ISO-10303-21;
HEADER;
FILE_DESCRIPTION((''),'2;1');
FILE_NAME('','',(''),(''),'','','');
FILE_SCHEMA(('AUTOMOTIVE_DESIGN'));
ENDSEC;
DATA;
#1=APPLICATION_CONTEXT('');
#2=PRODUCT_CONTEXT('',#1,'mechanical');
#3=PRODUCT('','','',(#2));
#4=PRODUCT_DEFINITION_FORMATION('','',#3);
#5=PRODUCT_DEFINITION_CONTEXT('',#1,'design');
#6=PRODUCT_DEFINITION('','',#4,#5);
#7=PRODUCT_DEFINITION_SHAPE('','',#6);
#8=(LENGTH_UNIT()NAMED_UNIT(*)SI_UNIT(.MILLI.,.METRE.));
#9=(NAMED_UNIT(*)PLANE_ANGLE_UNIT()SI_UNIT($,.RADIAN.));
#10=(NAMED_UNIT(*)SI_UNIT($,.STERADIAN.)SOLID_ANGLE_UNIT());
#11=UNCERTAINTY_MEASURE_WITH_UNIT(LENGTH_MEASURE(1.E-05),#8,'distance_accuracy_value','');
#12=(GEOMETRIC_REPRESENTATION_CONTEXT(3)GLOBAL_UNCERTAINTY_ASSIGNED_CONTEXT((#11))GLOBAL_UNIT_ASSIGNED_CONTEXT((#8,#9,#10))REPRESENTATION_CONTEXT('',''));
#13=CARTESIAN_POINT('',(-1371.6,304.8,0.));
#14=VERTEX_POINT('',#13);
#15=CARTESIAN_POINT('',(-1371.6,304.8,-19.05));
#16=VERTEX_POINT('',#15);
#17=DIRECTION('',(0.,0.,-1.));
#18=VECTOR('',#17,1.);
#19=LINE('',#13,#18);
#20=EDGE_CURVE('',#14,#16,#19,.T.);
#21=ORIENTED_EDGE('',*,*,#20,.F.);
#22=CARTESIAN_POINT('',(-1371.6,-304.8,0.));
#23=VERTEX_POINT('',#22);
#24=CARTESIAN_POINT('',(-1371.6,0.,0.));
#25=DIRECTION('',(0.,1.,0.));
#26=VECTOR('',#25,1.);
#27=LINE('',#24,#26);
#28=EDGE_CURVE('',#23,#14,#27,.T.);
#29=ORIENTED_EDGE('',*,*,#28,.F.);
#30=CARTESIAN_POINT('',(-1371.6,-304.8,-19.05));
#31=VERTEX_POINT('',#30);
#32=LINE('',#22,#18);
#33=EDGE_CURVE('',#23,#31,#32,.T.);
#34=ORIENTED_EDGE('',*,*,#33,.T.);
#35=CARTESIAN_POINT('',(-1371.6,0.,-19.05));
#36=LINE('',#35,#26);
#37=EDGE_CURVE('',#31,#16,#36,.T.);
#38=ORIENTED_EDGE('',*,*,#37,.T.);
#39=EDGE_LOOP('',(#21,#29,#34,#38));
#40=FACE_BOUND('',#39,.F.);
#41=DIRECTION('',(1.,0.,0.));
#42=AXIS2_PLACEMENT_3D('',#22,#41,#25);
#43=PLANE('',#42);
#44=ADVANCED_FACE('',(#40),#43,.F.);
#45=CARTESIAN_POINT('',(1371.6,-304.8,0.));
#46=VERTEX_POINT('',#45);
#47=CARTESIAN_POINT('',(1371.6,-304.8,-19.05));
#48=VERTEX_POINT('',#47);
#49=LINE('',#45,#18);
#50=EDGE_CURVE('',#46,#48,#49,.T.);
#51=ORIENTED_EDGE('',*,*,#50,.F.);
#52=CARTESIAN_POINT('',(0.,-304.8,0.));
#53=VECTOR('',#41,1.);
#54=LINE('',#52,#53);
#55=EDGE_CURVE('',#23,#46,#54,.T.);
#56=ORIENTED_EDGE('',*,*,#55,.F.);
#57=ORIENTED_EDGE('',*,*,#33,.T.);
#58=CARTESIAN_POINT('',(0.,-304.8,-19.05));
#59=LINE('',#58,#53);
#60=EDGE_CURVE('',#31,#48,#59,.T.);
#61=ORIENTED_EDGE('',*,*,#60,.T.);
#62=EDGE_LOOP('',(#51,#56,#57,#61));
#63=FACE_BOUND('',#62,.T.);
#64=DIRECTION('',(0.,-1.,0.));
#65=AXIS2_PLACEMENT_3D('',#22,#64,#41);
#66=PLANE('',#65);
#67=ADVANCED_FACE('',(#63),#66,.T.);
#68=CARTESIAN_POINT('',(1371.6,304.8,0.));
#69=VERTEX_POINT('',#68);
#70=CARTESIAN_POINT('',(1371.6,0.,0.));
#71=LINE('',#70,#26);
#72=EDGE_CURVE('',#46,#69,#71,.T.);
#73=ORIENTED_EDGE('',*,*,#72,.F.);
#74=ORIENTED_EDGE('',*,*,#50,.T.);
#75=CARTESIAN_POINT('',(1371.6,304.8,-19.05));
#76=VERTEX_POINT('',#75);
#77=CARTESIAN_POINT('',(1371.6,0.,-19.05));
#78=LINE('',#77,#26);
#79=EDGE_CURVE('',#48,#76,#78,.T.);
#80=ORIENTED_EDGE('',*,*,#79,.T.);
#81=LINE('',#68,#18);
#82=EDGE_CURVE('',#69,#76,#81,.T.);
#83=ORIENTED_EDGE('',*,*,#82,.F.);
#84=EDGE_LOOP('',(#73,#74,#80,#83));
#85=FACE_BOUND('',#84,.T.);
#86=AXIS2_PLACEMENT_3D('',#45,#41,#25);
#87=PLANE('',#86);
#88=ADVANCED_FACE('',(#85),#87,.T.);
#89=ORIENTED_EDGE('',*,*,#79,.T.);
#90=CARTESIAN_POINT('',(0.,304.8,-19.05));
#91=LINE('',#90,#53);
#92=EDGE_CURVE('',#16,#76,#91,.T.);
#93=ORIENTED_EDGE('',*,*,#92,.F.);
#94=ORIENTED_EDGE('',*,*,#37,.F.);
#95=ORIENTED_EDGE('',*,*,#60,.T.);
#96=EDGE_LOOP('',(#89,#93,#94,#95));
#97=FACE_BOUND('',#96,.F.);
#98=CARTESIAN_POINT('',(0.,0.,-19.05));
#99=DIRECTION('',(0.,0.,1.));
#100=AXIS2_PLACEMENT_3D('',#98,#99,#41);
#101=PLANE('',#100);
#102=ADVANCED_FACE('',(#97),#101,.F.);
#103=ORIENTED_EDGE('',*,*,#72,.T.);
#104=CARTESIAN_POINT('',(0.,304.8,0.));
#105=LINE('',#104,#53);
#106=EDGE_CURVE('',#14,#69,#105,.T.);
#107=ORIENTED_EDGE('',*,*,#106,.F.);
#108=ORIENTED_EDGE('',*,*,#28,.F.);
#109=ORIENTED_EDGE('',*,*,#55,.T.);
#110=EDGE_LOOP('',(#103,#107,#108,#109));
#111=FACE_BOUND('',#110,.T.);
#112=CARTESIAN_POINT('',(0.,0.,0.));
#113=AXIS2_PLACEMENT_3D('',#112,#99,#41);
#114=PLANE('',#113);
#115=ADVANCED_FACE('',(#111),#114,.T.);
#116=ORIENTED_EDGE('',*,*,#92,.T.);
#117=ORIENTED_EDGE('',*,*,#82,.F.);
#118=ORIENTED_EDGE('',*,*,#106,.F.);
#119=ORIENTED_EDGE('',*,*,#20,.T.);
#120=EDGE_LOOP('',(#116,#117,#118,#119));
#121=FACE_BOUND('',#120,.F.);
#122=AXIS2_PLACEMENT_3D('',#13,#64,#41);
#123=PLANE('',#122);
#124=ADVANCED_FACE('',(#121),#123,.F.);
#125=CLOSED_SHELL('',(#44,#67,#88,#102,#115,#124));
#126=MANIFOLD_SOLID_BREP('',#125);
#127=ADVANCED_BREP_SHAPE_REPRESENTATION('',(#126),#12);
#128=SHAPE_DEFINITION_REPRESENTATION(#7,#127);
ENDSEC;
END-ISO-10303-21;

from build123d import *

# Parameters (mm, degrees)
F1_W     = 2743.2
F1_H     = 609.6
F2_DEPTH = 19.05


# Not quite as in the source:
# - a variable given as a bare number and used for a length is read in inches; the dataset says mm whatever the document's units were


with BuildPart() as f2:
    # F1 (on Top) → F2 (new body)
    with BuildSketch(Plane.XY):
        Rectangle(F1_W, F1_H)
    extrude(amount=-F2_DEPTH)


solid = f2.part
